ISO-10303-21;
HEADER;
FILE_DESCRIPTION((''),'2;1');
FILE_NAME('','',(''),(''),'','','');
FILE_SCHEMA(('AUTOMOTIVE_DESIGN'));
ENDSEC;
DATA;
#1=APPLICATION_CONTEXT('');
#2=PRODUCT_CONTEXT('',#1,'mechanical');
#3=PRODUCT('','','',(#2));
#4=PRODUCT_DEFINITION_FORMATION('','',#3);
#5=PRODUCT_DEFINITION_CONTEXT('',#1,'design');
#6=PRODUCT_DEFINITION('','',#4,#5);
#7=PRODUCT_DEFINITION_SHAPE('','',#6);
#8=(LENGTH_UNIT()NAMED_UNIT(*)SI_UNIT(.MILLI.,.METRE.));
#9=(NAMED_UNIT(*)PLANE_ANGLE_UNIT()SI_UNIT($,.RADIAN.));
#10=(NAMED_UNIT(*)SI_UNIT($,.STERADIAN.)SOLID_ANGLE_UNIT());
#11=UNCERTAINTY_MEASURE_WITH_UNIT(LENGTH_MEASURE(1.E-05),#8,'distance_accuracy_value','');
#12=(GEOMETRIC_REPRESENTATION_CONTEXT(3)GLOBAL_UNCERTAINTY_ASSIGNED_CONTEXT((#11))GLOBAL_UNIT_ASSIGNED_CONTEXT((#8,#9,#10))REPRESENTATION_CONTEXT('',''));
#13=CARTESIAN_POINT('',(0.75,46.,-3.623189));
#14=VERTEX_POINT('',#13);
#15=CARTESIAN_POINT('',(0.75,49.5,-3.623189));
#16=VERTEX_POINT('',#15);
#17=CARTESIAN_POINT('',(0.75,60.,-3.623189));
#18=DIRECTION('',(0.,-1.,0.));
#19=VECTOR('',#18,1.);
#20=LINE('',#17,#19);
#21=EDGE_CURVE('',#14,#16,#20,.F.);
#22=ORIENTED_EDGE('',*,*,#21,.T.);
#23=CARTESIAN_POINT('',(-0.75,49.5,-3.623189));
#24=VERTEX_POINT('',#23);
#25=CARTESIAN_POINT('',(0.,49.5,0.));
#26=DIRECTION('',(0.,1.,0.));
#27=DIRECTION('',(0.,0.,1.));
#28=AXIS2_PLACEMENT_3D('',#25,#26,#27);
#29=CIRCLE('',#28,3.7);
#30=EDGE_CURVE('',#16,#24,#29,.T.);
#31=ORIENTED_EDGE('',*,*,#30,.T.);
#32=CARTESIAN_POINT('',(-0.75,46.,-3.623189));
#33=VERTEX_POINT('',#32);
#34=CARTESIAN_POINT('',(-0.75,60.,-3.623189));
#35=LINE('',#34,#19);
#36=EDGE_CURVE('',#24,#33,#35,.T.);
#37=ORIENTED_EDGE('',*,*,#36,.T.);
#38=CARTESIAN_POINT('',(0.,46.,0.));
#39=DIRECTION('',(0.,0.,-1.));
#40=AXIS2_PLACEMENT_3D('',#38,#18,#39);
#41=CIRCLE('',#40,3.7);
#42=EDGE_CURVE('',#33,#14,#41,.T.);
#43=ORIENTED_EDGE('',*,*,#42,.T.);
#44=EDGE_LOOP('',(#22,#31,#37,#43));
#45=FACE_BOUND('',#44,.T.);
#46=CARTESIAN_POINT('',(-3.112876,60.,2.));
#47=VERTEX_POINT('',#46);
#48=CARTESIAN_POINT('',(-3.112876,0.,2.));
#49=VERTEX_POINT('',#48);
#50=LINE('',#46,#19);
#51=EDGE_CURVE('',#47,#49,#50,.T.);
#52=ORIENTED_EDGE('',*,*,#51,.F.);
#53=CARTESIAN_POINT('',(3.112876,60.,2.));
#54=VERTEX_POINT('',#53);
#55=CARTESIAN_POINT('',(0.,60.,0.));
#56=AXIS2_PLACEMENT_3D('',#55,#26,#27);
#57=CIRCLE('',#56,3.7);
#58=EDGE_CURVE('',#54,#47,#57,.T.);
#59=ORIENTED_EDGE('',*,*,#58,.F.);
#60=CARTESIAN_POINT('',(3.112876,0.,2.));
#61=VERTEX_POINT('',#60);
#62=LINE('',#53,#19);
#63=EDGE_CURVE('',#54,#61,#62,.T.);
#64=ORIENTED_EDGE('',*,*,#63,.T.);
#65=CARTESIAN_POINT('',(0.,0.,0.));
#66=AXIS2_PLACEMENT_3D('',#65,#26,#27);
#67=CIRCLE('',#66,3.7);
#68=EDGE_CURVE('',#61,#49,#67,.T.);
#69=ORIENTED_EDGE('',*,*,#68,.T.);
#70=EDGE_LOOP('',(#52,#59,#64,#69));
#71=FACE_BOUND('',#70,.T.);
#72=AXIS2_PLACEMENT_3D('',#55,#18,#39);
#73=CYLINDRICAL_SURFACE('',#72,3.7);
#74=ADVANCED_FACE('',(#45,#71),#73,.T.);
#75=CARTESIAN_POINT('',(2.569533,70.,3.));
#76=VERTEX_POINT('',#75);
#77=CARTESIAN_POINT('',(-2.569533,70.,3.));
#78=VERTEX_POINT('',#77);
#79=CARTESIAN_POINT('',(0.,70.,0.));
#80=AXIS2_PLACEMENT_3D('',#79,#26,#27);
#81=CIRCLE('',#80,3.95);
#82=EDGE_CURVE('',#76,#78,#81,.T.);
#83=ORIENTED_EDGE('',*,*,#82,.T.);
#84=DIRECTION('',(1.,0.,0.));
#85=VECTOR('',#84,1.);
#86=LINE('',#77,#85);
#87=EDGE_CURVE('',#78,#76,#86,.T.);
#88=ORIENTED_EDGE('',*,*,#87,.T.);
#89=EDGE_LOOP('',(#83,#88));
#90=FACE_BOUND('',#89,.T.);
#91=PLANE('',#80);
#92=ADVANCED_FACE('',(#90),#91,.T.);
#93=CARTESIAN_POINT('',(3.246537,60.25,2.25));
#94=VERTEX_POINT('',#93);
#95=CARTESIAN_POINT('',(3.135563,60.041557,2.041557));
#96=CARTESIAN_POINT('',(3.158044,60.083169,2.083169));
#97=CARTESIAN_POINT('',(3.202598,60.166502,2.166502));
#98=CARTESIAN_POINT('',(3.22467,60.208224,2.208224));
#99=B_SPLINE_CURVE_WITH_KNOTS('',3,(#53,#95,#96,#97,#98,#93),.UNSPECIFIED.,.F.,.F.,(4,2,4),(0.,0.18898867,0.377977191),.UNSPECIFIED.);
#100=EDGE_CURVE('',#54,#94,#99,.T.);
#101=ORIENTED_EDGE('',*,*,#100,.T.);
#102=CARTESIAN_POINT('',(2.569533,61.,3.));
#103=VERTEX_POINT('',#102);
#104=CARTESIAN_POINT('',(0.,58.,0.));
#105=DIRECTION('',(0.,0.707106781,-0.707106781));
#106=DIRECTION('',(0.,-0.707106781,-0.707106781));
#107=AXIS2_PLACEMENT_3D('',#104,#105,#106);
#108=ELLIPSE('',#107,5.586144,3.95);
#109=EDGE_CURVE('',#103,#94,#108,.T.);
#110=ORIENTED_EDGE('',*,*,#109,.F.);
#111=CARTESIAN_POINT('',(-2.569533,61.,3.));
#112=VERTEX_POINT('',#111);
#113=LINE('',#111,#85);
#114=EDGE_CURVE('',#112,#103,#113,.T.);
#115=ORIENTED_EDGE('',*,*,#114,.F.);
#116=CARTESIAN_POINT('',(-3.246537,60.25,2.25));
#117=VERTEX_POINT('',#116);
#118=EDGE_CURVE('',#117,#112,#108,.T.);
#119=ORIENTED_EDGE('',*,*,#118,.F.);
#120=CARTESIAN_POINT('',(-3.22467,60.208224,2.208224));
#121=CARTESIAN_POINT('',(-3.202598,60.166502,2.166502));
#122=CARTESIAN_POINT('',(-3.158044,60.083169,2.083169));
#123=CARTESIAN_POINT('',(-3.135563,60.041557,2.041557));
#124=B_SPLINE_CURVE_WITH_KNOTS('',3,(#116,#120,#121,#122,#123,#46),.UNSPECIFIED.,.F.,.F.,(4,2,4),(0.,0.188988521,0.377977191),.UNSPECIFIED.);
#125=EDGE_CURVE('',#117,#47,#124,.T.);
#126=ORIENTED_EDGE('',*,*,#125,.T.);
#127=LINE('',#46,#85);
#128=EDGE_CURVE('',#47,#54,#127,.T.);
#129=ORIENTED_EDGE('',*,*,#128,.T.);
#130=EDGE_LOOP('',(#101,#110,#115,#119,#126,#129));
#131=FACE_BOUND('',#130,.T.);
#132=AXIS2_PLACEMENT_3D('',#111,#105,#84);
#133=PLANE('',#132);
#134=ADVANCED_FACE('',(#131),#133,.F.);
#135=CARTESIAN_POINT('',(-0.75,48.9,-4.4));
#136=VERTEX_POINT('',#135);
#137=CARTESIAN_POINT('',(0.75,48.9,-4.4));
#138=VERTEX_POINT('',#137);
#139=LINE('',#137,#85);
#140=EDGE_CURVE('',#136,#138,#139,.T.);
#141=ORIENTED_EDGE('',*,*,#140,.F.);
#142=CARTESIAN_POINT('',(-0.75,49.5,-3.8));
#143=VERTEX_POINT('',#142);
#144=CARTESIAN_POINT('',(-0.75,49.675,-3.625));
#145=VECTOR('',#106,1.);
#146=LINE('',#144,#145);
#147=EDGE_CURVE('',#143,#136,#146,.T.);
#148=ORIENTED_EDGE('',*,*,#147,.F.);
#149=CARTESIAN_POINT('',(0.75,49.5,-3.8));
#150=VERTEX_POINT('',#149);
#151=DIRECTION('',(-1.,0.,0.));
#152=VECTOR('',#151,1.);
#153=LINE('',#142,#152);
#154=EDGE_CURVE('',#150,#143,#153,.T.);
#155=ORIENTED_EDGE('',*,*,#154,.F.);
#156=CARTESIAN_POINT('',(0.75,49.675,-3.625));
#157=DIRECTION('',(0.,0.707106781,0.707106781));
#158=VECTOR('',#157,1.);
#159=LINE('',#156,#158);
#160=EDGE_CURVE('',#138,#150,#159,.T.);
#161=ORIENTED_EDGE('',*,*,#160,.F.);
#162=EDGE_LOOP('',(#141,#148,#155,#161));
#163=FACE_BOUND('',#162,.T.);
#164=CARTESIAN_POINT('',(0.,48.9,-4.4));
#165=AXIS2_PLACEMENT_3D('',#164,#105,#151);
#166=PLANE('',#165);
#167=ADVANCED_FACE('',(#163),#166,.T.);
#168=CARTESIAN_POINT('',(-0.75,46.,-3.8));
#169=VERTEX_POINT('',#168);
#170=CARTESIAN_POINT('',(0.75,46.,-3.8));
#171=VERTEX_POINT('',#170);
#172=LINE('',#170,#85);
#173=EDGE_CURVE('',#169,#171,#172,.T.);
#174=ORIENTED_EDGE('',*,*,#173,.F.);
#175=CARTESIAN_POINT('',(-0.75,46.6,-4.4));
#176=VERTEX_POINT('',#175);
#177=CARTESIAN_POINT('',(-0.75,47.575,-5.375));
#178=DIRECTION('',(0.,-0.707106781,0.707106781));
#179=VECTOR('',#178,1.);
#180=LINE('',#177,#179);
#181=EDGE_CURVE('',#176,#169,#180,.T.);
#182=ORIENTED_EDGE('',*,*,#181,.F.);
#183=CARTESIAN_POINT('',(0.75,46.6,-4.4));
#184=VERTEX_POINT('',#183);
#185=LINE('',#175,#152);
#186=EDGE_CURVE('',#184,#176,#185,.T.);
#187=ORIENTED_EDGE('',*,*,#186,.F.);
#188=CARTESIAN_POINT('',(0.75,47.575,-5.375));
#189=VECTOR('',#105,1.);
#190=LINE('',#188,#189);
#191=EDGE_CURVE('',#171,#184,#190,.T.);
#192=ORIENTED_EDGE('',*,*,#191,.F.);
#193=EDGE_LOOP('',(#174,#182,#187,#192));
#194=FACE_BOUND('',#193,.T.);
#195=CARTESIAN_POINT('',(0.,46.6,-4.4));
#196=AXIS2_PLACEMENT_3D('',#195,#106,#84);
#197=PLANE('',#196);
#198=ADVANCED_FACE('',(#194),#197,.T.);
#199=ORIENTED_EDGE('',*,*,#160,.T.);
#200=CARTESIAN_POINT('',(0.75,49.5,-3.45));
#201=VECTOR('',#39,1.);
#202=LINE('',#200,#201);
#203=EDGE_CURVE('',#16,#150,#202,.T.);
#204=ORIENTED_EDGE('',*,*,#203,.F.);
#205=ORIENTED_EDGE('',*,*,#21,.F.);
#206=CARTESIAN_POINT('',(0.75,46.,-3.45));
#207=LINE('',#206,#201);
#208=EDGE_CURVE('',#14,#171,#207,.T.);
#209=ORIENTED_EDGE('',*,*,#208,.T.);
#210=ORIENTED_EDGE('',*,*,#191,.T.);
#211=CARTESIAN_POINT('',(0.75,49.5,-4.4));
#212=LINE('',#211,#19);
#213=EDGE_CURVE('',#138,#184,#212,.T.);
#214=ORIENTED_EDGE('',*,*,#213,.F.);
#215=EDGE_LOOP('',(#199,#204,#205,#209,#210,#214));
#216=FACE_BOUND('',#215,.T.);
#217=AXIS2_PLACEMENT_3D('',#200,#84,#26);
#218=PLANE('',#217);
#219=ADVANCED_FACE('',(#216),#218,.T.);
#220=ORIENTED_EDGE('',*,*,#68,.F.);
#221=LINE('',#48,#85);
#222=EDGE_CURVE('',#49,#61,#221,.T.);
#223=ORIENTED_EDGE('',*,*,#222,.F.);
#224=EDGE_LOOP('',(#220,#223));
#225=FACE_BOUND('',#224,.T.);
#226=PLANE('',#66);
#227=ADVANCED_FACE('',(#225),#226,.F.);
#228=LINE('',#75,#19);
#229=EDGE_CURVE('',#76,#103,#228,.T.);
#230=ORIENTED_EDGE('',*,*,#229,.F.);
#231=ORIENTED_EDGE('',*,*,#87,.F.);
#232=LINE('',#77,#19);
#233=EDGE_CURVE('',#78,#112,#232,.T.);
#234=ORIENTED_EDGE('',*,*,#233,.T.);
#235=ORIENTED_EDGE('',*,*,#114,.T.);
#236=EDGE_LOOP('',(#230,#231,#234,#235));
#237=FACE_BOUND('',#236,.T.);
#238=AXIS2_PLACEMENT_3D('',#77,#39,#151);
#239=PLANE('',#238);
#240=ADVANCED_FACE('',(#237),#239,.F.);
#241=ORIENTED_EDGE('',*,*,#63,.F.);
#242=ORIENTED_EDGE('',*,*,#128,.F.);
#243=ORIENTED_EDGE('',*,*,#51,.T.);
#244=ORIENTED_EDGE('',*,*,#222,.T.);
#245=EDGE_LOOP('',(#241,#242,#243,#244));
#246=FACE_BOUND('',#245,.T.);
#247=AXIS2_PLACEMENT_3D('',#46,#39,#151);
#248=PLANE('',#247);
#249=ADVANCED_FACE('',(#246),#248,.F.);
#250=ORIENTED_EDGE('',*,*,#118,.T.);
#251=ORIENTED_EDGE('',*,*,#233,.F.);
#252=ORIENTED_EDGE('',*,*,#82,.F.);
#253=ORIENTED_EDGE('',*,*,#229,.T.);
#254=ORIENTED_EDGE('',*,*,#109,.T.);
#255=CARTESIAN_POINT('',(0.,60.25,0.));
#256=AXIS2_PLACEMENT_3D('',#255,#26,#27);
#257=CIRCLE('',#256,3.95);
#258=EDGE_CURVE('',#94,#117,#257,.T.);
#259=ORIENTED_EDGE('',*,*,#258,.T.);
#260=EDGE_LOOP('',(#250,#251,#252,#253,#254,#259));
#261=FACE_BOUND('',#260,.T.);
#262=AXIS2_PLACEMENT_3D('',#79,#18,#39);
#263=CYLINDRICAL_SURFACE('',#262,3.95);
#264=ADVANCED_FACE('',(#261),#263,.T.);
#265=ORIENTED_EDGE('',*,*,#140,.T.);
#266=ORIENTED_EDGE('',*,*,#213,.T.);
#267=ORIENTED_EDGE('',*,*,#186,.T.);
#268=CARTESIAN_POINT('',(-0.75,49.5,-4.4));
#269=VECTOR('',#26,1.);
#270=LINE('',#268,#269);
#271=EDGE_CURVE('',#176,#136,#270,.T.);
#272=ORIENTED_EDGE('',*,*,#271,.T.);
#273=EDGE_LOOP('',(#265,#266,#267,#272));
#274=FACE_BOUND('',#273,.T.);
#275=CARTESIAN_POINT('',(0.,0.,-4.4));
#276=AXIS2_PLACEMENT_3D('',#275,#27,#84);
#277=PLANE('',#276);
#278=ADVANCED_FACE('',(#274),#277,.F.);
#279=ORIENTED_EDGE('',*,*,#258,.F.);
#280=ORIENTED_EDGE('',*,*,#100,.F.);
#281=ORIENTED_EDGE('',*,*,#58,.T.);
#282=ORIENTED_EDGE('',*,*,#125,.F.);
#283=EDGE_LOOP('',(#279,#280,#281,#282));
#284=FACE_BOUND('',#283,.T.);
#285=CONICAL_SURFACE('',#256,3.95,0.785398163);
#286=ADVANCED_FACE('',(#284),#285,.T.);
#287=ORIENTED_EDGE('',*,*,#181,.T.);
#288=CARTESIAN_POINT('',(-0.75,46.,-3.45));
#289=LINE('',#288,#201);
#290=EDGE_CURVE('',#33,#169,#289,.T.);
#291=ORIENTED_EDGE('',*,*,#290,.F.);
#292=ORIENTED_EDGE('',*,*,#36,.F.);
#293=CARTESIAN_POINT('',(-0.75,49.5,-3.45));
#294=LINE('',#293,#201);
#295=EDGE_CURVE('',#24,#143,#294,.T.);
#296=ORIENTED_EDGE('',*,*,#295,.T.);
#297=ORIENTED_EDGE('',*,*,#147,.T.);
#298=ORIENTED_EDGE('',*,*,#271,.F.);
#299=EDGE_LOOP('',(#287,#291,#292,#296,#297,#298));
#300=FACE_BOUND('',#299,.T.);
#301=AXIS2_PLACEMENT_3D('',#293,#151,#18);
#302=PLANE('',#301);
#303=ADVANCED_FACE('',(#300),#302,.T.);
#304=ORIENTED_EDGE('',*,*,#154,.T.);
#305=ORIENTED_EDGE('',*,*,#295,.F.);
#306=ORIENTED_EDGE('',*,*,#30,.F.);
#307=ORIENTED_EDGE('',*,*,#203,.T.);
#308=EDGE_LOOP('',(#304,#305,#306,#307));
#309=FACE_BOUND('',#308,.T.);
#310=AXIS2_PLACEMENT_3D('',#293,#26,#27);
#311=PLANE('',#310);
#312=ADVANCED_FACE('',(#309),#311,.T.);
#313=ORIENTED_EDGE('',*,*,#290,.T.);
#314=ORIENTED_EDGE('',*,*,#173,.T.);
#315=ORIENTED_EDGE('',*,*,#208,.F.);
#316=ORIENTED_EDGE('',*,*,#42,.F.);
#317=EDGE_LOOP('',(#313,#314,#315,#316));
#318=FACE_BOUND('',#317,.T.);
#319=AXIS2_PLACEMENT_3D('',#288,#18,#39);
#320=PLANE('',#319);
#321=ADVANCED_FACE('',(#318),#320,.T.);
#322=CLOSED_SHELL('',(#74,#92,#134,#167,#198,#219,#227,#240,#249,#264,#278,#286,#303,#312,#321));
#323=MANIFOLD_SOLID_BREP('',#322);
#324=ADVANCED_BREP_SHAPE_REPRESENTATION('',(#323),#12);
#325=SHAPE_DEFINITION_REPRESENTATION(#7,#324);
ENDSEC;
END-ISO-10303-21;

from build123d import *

# Parameters (mm, degrees)
BOSS_EXTRUDE1_DEPTH = 60
SKETCH2_W           = 1.5
SKETCH2_H           = 3.5
BOSS_EXTRUDE2_DEPTH = 0.7
SKETCH2_2_W         = 1.5
SKETCH2_2_H         = 3.5
BOSS_EXTRUDE3_DEPTH = 0.25
CHAMFER1_SIZE       = 0.6
CHAMFER2_SIZE       = 0.6
BOSS_EXTRUDE4_DEPTH = 10
CHAMFER3_SIZE       = 1
CHAMFER4_SIZE       = 0.25


with BuildPart() as part:
    # Sketch1 → Boss-Extrude1 (new body)
    with BuildSketch(Plane(origin=(0, 0, 0), x_dir=(1, 0, 0), z_dir=(0, 1, 0))):
        with BuildLine():
            Line((-3.112876483, -2), (3.112876483, -2))
            ThreePointArc((3.112876483, -2), (0, 3.7), (-3.112876483, -2))
        make_face()
    extrude(amount=BOSS_EXTRUDE1_DEPTH)



with BuildPart() as body_2:
    # Sketch2 → Boss-Extrude2 (new body)
    with BuildSketch(Plane(origin=(0, 0, -3.7), x_dir=(-1, 0, 0), z_dir=(0, 0, -1))):
        with Locations((0, 47.75)):
            Rectangle(SKETCH2_W, SKETCH2_H)
    extrude(amount=BOSS_EXTRUDE2_DEPTH)


with BuildPart() as part_1:
    add(part.part)

    add(body_2.part)  # Boss-Extrude3 merges body 2
    # Sketch2<2> → Boss-Extrude3 (add)
    with BuildSketch(Plane(origin=(0, 0, -3.7), x_dir=(-1, 0, 0), z_dir=(0, 0, -1))):
        with Locations((0, 47.75)):
            Rectangle(SKETCH2_2_W, SKETCH2_2_H)
    extrude(amount=-BOSS_EXTRUDE3_DEPTH)

    # Chamfer1
    chamfer1_edges = [part_1.edges().sort_by_distance(p)[0] for p in [
        (0, 49.5, -4.4),
    ]]
    chamfer(chamfer1_edges, length=CHAMFER1_SIZE)

    # Chamfer2
    chamfer2_edges = [part_1.edges().sort_by_distance(p)[0] for p in [
        (0, 46, -4.4),
    ]]
    chamfer(chamfer2_edges, length=CHAMFER2_SIZE)

    # Sketch3 → Boss-Extrude4 (add)
    with BuildSketch(Plane(origin=(0, 60, 0), x_dir=(1, 0, 0), z_dir=(0, 1, 0))):
        with BuildLine():
            Line((-2.569533032, -3), (2.569533032, -3))
            ThreePointArc((2.569533032, -3), (0, 3.95), (-2.569533032, -3))
        make_face()
    extrude(amount=BOSS_EXTRUDE4_DEPTH)

    # Chamfer3
    chamfer3_edges = [part_1.edges().sort_by_distance(p)[0] for p in [
        (0, 60, 3),
    ]]
    chamfer(chamfer3_edges, length=CHAMFER3_SIZE - 0.0001)  # a hair under: the kernel refuses the full size

    # Chamfer4
    chamfer4_edges = [part_1.edges().sort_by_distance(p)[0] for p in [
        (0, 60, -3.95),
    ]]
    chamfer(chamfer4_edges, length=CHAMFER4_SIZE - 0.0001)  # a hair under: the kernel refuses the full size


solid = part_1.part
